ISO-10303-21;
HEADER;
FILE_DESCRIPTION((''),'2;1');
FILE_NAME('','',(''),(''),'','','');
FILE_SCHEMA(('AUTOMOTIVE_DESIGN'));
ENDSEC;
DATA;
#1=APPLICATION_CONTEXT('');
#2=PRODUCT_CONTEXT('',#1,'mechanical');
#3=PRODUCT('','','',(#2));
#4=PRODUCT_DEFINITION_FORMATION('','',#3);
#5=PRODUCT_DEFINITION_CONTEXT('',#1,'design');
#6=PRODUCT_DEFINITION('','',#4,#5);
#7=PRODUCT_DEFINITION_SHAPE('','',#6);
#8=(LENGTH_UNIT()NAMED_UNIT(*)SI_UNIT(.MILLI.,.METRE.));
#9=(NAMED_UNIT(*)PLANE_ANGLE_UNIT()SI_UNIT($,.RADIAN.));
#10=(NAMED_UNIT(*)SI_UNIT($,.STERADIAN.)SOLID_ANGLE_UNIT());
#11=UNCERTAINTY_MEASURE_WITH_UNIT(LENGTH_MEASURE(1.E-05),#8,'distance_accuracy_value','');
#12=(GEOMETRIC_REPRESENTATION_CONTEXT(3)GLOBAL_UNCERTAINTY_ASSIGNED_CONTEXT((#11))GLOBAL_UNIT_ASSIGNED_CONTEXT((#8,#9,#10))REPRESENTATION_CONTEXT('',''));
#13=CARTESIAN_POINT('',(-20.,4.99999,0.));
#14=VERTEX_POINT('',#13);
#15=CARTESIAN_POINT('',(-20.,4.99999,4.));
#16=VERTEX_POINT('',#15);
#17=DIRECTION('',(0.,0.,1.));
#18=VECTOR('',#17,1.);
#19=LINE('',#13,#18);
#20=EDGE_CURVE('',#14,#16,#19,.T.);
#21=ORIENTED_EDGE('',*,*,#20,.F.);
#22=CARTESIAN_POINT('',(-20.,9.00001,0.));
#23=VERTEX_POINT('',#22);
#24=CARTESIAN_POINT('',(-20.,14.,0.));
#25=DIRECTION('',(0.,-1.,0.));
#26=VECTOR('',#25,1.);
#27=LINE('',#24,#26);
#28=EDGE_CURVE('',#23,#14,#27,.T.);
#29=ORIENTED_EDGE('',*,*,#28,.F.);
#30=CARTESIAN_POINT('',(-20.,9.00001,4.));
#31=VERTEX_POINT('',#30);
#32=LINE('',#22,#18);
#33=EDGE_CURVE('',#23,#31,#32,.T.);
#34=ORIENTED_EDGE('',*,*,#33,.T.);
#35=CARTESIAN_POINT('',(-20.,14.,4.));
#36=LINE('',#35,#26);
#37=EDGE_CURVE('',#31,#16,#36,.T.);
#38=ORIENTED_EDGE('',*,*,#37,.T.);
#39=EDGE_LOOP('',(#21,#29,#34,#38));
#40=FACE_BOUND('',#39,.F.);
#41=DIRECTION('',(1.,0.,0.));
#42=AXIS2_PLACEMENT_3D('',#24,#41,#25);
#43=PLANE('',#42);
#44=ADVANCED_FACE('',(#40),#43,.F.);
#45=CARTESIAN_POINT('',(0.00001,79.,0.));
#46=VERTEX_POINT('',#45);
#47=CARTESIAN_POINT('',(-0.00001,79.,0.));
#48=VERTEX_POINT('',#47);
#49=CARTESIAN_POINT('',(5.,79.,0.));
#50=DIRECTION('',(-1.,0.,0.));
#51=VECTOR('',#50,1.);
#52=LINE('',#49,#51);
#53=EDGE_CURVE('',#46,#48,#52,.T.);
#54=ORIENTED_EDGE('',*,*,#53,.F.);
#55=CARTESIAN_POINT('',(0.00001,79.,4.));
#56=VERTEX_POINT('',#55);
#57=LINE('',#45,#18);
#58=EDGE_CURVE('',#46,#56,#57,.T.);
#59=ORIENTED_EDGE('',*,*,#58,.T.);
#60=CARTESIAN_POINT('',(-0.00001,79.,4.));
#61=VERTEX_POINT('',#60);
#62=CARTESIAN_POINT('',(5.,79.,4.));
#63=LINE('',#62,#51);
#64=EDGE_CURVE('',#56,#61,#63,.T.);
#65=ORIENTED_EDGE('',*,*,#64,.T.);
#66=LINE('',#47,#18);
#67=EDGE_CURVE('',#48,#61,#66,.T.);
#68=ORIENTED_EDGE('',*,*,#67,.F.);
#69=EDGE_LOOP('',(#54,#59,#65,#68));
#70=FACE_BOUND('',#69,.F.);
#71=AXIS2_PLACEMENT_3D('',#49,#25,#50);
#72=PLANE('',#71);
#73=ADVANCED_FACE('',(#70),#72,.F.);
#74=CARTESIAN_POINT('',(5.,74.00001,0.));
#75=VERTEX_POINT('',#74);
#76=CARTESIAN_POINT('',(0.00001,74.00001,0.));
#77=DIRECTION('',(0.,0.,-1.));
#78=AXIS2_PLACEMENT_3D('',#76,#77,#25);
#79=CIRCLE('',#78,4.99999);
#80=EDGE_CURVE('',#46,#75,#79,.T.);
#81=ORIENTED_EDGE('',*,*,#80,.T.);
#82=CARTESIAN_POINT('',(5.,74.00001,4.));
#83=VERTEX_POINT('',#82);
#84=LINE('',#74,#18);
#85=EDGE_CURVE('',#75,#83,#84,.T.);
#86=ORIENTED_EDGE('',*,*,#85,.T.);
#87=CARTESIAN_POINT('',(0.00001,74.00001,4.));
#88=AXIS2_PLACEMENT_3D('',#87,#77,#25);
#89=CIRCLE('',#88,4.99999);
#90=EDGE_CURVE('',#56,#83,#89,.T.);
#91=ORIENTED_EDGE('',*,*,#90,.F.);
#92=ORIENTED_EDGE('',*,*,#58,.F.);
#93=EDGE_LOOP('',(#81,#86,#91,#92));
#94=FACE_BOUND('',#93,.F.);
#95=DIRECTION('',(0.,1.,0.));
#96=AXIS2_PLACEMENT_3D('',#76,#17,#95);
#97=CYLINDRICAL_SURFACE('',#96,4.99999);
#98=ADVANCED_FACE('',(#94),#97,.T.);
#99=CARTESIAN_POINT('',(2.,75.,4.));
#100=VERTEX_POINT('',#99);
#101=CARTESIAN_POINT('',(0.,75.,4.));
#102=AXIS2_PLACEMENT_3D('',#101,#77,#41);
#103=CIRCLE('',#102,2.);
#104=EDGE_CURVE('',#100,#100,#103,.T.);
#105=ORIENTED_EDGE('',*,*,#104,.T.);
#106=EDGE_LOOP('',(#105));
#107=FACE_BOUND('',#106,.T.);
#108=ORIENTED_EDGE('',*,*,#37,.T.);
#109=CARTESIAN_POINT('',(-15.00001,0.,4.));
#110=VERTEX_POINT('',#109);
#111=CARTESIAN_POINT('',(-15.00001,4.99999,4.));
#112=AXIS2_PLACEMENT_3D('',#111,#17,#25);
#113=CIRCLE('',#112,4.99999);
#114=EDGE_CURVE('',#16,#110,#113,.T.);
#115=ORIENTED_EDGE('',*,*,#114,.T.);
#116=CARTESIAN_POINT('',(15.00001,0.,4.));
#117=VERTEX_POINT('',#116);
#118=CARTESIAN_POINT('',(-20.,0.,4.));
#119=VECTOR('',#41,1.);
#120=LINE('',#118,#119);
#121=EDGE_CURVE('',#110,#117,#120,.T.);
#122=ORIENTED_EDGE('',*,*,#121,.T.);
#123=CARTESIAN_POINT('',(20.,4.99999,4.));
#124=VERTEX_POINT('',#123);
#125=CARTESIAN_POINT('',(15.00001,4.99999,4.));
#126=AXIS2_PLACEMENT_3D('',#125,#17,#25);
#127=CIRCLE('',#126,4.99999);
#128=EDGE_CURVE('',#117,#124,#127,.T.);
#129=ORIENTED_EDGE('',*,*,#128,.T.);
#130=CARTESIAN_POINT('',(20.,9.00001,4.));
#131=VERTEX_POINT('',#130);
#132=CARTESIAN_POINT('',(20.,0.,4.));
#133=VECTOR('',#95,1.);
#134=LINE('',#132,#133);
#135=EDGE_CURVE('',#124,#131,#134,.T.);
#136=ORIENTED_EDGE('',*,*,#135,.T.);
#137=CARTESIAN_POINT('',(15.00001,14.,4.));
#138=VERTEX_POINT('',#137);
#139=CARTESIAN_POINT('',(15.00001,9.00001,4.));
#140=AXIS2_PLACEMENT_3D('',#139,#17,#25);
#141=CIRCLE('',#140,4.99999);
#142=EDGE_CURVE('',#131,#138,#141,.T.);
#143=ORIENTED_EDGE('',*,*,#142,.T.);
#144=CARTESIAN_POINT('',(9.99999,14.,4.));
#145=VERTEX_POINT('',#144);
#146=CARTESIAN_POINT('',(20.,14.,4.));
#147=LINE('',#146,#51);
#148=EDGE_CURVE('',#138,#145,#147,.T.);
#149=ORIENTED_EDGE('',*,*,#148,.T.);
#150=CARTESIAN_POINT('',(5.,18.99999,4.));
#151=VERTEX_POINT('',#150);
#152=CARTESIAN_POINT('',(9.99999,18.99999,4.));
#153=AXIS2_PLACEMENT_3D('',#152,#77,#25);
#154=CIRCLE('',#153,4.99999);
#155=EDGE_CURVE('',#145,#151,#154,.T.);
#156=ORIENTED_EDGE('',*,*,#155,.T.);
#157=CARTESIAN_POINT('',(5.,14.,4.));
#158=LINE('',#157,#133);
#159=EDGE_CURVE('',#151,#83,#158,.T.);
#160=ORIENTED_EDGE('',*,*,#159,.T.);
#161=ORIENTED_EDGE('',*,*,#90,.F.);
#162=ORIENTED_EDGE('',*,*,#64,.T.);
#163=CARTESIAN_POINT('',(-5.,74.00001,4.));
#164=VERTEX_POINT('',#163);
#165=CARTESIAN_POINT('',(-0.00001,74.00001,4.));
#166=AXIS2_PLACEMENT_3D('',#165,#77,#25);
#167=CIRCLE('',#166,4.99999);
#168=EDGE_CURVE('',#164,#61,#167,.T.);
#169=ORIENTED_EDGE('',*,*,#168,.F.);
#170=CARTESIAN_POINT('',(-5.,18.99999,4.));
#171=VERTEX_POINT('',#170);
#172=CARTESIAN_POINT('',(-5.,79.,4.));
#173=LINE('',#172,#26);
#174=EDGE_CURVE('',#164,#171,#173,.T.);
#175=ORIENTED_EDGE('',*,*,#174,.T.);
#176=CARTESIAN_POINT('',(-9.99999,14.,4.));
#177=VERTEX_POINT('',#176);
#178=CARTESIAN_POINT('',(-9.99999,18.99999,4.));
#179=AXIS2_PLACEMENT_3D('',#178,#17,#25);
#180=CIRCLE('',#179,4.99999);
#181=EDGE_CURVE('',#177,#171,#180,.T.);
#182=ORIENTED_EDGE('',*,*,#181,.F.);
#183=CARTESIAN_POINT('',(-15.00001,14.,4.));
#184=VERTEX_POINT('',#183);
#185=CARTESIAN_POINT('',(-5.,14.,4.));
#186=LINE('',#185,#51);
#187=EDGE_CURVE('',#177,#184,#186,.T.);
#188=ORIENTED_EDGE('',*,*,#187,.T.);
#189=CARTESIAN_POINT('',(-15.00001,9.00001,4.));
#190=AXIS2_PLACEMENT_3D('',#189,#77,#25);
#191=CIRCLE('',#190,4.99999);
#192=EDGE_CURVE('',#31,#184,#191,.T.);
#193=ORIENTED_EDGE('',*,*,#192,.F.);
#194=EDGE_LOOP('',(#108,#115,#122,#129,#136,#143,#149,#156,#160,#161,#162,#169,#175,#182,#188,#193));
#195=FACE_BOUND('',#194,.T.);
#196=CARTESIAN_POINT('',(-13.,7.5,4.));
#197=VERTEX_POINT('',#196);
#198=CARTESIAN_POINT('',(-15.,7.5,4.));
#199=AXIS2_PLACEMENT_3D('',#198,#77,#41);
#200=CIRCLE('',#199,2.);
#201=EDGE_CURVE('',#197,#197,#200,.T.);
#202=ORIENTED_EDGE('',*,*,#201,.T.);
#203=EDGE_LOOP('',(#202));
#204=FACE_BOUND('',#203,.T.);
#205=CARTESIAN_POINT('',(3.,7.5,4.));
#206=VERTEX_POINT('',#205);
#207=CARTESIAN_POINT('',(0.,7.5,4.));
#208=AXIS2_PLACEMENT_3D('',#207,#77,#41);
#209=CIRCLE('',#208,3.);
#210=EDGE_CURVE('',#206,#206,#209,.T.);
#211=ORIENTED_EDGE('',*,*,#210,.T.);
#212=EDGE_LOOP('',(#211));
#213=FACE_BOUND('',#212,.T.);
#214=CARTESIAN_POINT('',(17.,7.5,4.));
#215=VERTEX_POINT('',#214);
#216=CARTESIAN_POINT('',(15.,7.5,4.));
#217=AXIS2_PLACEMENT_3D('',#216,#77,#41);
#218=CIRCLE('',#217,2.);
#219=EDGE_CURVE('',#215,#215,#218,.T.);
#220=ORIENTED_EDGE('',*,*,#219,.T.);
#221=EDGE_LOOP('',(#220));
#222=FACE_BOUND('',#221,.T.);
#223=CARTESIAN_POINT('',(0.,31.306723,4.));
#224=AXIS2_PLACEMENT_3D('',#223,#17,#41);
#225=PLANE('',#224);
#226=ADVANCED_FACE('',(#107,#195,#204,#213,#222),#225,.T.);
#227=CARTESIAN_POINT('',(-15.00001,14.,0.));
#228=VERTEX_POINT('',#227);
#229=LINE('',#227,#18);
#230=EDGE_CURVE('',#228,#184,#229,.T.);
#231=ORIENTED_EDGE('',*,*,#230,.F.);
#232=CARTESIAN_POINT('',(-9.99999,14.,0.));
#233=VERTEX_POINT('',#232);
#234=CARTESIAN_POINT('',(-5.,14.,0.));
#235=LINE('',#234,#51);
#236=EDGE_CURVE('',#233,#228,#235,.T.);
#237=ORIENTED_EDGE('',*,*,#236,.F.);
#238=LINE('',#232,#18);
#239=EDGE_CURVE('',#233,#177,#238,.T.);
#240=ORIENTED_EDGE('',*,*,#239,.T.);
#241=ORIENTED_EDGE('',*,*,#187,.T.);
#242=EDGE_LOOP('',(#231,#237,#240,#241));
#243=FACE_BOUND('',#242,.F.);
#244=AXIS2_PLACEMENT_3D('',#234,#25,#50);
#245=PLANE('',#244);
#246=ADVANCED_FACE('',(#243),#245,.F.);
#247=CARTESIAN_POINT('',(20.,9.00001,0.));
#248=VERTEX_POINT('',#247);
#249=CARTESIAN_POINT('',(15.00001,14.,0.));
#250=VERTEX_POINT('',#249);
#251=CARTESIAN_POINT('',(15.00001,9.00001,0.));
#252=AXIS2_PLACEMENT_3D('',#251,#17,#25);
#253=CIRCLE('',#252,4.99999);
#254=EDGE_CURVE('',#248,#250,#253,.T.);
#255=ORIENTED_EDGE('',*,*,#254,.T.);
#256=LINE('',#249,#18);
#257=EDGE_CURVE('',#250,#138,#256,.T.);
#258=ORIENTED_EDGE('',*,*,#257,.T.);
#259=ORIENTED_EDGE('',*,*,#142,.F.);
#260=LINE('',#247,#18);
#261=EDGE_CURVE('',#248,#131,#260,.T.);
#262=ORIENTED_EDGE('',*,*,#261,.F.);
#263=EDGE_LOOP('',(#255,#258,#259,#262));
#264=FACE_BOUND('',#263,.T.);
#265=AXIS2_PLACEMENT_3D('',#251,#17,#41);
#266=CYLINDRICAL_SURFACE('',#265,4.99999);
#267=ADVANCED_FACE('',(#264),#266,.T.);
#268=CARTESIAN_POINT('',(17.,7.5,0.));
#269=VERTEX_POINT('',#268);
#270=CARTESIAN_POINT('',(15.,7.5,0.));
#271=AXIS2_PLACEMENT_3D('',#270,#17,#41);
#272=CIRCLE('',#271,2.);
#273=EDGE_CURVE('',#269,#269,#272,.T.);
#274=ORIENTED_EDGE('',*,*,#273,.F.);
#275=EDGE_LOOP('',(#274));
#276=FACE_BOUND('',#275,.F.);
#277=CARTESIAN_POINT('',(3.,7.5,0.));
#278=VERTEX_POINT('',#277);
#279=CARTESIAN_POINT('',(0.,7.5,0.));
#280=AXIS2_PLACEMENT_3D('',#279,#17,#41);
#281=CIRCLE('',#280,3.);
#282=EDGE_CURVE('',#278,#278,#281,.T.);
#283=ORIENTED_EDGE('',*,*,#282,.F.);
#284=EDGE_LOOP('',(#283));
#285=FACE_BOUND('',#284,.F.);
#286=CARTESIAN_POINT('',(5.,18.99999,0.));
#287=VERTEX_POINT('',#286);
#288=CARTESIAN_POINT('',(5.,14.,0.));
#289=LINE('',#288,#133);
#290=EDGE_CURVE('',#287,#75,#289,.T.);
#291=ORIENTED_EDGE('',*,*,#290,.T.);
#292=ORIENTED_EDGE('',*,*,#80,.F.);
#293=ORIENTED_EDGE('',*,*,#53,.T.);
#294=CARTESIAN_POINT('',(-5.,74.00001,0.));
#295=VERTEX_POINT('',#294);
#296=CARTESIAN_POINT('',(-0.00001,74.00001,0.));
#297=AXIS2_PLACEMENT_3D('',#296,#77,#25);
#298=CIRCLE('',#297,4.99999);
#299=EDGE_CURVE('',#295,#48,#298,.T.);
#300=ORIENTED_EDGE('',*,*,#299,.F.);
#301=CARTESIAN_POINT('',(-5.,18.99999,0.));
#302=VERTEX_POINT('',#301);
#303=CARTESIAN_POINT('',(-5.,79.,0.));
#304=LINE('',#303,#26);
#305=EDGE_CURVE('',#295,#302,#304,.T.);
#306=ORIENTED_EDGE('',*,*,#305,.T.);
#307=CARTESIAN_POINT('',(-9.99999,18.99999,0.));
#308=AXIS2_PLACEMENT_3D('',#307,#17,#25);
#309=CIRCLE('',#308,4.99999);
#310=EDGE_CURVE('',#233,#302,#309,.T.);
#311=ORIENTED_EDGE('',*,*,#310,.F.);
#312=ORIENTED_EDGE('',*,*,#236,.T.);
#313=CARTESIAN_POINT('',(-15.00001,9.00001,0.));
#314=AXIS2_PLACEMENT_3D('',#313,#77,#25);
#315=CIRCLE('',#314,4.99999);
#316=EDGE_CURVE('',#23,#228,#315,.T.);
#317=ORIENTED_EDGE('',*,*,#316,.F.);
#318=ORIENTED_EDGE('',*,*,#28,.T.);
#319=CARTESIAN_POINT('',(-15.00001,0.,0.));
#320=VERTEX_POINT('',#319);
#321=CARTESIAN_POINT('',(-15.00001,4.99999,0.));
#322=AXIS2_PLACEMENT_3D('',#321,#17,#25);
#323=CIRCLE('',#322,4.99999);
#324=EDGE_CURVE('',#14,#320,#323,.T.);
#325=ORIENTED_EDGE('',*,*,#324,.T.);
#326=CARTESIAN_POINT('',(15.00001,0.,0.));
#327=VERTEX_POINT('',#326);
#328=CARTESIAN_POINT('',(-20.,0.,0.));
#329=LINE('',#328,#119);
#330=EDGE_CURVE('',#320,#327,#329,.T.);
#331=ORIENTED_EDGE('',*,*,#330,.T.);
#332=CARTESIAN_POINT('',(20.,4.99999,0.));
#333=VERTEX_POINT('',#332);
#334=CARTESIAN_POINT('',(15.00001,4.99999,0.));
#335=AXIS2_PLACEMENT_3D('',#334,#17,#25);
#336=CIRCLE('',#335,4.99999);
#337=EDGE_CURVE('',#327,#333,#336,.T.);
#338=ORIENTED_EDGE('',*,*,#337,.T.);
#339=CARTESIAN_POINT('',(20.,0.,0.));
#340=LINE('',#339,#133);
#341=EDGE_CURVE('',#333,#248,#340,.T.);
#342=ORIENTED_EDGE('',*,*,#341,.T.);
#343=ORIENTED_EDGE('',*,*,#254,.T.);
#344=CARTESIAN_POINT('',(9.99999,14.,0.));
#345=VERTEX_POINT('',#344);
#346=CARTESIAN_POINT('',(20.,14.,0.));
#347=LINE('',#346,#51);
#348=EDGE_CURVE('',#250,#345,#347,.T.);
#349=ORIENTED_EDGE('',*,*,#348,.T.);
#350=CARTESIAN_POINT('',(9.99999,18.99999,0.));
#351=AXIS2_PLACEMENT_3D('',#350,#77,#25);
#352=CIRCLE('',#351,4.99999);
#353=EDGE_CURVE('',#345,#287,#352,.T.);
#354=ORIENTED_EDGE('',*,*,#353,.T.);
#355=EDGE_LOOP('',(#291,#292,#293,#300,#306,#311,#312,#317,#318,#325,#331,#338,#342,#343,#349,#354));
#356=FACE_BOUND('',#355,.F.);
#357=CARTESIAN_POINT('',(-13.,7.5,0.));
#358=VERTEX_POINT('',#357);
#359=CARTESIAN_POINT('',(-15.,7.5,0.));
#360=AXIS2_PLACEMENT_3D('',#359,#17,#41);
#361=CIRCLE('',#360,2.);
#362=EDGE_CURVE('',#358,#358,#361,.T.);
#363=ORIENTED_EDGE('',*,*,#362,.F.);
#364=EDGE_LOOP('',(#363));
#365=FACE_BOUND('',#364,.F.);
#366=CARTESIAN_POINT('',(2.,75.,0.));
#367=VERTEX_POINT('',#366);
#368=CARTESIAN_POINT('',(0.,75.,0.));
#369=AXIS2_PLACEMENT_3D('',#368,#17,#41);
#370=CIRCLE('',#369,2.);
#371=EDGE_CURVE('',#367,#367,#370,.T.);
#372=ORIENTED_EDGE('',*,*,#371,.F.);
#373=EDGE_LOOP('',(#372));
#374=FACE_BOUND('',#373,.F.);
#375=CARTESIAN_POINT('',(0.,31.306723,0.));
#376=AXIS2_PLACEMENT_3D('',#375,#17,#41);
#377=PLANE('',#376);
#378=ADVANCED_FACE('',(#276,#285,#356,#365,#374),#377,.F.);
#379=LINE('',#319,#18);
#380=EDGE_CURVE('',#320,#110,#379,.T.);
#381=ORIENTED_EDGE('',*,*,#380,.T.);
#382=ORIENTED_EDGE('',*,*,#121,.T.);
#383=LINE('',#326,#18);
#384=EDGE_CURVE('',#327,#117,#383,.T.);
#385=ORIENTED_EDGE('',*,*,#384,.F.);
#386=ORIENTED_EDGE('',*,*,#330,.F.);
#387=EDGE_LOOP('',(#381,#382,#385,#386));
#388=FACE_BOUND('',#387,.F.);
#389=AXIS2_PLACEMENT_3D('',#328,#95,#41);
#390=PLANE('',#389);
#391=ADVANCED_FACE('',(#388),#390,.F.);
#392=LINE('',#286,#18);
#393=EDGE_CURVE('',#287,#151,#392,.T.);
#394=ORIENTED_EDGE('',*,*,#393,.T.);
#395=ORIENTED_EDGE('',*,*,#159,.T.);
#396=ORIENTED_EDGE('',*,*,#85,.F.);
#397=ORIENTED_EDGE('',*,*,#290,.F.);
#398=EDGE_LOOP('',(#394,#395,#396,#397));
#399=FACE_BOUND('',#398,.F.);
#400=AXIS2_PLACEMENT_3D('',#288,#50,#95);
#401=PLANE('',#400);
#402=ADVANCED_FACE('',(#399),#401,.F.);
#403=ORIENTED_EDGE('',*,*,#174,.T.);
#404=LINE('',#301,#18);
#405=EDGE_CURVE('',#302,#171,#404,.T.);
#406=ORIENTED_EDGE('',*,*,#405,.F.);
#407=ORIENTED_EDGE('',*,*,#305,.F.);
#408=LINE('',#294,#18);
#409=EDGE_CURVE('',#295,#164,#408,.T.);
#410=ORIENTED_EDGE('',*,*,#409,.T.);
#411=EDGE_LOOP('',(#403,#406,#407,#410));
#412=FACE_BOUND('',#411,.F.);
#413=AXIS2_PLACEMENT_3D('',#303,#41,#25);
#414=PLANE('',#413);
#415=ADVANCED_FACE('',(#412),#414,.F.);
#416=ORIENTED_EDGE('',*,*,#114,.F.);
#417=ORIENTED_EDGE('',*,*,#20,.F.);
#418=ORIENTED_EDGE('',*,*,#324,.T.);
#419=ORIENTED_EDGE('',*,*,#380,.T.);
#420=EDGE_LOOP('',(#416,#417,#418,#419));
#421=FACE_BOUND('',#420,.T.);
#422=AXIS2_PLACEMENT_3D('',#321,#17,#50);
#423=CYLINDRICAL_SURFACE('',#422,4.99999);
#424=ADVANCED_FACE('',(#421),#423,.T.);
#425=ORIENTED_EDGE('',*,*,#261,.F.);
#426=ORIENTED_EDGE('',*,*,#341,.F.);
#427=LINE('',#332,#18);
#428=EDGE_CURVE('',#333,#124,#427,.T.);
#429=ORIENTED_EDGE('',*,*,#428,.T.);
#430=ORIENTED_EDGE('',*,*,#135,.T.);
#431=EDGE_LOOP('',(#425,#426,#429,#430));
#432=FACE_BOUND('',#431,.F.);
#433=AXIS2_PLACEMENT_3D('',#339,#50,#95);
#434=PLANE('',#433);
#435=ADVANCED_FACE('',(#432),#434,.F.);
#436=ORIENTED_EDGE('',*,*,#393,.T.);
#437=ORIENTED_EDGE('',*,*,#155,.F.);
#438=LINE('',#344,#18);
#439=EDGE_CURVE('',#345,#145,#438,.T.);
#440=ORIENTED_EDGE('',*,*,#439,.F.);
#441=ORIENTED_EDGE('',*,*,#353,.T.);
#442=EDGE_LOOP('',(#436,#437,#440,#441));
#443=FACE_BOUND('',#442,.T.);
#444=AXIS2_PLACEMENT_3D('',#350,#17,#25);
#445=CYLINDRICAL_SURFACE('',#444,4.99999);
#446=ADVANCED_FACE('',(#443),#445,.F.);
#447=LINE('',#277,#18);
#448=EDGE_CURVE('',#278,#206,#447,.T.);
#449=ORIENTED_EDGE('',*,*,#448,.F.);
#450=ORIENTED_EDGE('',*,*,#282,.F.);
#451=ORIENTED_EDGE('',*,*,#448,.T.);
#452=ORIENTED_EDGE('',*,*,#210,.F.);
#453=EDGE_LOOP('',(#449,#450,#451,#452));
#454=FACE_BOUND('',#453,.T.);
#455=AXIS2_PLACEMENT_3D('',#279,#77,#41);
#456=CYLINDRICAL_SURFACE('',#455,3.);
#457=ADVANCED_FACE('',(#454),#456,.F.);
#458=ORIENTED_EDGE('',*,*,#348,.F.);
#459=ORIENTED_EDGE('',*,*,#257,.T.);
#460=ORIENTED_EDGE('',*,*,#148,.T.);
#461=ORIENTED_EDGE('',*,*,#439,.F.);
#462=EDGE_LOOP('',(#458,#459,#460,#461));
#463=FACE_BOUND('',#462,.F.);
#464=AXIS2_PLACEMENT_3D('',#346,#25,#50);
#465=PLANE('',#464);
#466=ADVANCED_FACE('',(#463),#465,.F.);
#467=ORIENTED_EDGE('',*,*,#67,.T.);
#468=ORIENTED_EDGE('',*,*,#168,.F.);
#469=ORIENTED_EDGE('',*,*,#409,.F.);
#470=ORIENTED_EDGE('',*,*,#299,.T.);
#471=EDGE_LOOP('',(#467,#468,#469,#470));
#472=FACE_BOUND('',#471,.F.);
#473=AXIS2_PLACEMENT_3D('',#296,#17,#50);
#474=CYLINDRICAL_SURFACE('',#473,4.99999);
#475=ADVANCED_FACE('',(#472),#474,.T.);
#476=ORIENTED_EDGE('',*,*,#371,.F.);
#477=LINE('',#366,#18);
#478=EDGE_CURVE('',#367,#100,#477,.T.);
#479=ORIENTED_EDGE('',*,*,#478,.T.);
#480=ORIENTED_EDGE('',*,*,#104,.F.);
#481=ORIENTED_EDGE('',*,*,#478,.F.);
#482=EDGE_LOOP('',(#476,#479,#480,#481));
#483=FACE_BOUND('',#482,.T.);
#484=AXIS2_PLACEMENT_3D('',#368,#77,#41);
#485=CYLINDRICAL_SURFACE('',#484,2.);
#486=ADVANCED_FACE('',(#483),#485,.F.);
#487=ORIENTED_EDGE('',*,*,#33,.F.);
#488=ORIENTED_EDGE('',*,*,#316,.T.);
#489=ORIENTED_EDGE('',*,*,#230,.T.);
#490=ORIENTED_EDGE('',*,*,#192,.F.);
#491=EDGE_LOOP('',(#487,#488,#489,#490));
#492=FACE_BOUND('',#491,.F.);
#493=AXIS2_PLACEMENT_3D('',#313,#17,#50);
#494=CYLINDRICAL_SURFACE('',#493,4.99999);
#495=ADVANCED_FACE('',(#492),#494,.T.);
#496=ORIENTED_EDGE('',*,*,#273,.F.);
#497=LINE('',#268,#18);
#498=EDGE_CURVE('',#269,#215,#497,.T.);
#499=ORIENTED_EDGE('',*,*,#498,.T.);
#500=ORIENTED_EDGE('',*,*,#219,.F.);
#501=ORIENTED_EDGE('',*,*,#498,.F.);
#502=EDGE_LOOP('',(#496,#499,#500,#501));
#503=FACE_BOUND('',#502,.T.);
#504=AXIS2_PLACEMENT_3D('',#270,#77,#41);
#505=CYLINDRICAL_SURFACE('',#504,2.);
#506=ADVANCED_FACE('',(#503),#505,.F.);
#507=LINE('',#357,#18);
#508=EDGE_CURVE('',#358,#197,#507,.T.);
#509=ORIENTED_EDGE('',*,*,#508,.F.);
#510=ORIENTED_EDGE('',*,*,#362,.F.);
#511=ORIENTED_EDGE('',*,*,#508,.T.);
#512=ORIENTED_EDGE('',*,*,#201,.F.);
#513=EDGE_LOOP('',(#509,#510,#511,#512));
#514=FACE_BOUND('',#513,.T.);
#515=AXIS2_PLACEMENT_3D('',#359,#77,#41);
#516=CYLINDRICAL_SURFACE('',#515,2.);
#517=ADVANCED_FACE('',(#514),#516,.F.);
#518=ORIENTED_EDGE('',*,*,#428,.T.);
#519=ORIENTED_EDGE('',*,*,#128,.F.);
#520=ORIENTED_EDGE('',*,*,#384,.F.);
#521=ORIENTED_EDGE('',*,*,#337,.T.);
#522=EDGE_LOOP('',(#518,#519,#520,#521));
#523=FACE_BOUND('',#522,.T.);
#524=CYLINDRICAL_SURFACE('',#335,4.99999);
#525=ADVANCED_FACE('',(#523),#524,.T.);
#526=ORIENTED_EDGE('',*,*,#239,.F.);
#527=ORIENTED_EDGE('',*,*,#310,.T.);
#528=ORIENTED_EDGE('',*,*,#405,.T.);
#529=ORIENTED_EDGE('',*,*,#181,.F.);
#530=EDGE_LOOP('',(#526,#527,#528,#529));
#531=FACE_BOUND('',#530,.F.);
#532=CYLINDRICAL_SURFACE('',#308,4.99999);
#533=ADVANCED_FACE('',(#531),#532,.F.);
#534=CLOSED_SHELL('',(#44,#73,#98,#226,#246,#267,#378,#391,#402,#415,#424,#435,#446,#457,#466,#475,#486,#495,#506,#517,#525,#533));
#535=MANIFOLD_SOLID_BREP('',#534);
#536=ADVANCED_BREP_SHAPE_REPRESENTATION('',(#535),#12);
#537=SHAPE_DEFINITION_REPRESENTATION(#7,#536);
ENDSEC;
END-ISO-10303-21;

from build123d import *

# Parameters (mm, degrees)
F1_DEPTH = 4
F2_R     = 2
F2_R_2   = 3
F3_DEPTH = 25
F4_R     = 4.99999


# Not quite as in the source:
# - a fillet or chamfer is up to 0.001 mm smaller than in the source, because OpenCascade refuses the exact size


with BuildPart() as f1:
    # F0 (on Top) → F1 (new body)
    with BuildSketch(Plane.XY):
        Polygon((-20, 14), (-20, 0), (20, 0), (20, 14), (5, 14), (5, 79), (-5, 79), (-5, 14), align=None)
    extrude(amount=F1_DEPTH)

    # F2 (on Top) → F3 (cut)
    with BuildSketch(Plane.XY):
        with Locations((-15, 7.5)):
            Circle(F2_R)
        with Locations((15, 7.5)):
            Circle(F2_R)
        with Locations((0, 75)):
            Circle(F2_R)
        with Locations((0, 7.5)):
            Circle(F2_R_2)
    extrude(amount=F3_DEPTH, mode=Mode.SUBTRACT)

    # F4 (radius 5 in the source; OpenCascade refuses exactly that, so slightly less here)
    f4_edges = [f1.edges().sort_by_distance(p)[0] for p in [
        (-5, 79, 2),
        (5, 79, 2),
        (20, 0, 2),
        (-20, 0, 2),
        (-20, 14, 2),
        (20, 14, 2),
        (5, 14, 2),
        (-5, 14, 2),
    ]]
    fillet(f4_edges, radius=F4_R)


solid = f1.part
